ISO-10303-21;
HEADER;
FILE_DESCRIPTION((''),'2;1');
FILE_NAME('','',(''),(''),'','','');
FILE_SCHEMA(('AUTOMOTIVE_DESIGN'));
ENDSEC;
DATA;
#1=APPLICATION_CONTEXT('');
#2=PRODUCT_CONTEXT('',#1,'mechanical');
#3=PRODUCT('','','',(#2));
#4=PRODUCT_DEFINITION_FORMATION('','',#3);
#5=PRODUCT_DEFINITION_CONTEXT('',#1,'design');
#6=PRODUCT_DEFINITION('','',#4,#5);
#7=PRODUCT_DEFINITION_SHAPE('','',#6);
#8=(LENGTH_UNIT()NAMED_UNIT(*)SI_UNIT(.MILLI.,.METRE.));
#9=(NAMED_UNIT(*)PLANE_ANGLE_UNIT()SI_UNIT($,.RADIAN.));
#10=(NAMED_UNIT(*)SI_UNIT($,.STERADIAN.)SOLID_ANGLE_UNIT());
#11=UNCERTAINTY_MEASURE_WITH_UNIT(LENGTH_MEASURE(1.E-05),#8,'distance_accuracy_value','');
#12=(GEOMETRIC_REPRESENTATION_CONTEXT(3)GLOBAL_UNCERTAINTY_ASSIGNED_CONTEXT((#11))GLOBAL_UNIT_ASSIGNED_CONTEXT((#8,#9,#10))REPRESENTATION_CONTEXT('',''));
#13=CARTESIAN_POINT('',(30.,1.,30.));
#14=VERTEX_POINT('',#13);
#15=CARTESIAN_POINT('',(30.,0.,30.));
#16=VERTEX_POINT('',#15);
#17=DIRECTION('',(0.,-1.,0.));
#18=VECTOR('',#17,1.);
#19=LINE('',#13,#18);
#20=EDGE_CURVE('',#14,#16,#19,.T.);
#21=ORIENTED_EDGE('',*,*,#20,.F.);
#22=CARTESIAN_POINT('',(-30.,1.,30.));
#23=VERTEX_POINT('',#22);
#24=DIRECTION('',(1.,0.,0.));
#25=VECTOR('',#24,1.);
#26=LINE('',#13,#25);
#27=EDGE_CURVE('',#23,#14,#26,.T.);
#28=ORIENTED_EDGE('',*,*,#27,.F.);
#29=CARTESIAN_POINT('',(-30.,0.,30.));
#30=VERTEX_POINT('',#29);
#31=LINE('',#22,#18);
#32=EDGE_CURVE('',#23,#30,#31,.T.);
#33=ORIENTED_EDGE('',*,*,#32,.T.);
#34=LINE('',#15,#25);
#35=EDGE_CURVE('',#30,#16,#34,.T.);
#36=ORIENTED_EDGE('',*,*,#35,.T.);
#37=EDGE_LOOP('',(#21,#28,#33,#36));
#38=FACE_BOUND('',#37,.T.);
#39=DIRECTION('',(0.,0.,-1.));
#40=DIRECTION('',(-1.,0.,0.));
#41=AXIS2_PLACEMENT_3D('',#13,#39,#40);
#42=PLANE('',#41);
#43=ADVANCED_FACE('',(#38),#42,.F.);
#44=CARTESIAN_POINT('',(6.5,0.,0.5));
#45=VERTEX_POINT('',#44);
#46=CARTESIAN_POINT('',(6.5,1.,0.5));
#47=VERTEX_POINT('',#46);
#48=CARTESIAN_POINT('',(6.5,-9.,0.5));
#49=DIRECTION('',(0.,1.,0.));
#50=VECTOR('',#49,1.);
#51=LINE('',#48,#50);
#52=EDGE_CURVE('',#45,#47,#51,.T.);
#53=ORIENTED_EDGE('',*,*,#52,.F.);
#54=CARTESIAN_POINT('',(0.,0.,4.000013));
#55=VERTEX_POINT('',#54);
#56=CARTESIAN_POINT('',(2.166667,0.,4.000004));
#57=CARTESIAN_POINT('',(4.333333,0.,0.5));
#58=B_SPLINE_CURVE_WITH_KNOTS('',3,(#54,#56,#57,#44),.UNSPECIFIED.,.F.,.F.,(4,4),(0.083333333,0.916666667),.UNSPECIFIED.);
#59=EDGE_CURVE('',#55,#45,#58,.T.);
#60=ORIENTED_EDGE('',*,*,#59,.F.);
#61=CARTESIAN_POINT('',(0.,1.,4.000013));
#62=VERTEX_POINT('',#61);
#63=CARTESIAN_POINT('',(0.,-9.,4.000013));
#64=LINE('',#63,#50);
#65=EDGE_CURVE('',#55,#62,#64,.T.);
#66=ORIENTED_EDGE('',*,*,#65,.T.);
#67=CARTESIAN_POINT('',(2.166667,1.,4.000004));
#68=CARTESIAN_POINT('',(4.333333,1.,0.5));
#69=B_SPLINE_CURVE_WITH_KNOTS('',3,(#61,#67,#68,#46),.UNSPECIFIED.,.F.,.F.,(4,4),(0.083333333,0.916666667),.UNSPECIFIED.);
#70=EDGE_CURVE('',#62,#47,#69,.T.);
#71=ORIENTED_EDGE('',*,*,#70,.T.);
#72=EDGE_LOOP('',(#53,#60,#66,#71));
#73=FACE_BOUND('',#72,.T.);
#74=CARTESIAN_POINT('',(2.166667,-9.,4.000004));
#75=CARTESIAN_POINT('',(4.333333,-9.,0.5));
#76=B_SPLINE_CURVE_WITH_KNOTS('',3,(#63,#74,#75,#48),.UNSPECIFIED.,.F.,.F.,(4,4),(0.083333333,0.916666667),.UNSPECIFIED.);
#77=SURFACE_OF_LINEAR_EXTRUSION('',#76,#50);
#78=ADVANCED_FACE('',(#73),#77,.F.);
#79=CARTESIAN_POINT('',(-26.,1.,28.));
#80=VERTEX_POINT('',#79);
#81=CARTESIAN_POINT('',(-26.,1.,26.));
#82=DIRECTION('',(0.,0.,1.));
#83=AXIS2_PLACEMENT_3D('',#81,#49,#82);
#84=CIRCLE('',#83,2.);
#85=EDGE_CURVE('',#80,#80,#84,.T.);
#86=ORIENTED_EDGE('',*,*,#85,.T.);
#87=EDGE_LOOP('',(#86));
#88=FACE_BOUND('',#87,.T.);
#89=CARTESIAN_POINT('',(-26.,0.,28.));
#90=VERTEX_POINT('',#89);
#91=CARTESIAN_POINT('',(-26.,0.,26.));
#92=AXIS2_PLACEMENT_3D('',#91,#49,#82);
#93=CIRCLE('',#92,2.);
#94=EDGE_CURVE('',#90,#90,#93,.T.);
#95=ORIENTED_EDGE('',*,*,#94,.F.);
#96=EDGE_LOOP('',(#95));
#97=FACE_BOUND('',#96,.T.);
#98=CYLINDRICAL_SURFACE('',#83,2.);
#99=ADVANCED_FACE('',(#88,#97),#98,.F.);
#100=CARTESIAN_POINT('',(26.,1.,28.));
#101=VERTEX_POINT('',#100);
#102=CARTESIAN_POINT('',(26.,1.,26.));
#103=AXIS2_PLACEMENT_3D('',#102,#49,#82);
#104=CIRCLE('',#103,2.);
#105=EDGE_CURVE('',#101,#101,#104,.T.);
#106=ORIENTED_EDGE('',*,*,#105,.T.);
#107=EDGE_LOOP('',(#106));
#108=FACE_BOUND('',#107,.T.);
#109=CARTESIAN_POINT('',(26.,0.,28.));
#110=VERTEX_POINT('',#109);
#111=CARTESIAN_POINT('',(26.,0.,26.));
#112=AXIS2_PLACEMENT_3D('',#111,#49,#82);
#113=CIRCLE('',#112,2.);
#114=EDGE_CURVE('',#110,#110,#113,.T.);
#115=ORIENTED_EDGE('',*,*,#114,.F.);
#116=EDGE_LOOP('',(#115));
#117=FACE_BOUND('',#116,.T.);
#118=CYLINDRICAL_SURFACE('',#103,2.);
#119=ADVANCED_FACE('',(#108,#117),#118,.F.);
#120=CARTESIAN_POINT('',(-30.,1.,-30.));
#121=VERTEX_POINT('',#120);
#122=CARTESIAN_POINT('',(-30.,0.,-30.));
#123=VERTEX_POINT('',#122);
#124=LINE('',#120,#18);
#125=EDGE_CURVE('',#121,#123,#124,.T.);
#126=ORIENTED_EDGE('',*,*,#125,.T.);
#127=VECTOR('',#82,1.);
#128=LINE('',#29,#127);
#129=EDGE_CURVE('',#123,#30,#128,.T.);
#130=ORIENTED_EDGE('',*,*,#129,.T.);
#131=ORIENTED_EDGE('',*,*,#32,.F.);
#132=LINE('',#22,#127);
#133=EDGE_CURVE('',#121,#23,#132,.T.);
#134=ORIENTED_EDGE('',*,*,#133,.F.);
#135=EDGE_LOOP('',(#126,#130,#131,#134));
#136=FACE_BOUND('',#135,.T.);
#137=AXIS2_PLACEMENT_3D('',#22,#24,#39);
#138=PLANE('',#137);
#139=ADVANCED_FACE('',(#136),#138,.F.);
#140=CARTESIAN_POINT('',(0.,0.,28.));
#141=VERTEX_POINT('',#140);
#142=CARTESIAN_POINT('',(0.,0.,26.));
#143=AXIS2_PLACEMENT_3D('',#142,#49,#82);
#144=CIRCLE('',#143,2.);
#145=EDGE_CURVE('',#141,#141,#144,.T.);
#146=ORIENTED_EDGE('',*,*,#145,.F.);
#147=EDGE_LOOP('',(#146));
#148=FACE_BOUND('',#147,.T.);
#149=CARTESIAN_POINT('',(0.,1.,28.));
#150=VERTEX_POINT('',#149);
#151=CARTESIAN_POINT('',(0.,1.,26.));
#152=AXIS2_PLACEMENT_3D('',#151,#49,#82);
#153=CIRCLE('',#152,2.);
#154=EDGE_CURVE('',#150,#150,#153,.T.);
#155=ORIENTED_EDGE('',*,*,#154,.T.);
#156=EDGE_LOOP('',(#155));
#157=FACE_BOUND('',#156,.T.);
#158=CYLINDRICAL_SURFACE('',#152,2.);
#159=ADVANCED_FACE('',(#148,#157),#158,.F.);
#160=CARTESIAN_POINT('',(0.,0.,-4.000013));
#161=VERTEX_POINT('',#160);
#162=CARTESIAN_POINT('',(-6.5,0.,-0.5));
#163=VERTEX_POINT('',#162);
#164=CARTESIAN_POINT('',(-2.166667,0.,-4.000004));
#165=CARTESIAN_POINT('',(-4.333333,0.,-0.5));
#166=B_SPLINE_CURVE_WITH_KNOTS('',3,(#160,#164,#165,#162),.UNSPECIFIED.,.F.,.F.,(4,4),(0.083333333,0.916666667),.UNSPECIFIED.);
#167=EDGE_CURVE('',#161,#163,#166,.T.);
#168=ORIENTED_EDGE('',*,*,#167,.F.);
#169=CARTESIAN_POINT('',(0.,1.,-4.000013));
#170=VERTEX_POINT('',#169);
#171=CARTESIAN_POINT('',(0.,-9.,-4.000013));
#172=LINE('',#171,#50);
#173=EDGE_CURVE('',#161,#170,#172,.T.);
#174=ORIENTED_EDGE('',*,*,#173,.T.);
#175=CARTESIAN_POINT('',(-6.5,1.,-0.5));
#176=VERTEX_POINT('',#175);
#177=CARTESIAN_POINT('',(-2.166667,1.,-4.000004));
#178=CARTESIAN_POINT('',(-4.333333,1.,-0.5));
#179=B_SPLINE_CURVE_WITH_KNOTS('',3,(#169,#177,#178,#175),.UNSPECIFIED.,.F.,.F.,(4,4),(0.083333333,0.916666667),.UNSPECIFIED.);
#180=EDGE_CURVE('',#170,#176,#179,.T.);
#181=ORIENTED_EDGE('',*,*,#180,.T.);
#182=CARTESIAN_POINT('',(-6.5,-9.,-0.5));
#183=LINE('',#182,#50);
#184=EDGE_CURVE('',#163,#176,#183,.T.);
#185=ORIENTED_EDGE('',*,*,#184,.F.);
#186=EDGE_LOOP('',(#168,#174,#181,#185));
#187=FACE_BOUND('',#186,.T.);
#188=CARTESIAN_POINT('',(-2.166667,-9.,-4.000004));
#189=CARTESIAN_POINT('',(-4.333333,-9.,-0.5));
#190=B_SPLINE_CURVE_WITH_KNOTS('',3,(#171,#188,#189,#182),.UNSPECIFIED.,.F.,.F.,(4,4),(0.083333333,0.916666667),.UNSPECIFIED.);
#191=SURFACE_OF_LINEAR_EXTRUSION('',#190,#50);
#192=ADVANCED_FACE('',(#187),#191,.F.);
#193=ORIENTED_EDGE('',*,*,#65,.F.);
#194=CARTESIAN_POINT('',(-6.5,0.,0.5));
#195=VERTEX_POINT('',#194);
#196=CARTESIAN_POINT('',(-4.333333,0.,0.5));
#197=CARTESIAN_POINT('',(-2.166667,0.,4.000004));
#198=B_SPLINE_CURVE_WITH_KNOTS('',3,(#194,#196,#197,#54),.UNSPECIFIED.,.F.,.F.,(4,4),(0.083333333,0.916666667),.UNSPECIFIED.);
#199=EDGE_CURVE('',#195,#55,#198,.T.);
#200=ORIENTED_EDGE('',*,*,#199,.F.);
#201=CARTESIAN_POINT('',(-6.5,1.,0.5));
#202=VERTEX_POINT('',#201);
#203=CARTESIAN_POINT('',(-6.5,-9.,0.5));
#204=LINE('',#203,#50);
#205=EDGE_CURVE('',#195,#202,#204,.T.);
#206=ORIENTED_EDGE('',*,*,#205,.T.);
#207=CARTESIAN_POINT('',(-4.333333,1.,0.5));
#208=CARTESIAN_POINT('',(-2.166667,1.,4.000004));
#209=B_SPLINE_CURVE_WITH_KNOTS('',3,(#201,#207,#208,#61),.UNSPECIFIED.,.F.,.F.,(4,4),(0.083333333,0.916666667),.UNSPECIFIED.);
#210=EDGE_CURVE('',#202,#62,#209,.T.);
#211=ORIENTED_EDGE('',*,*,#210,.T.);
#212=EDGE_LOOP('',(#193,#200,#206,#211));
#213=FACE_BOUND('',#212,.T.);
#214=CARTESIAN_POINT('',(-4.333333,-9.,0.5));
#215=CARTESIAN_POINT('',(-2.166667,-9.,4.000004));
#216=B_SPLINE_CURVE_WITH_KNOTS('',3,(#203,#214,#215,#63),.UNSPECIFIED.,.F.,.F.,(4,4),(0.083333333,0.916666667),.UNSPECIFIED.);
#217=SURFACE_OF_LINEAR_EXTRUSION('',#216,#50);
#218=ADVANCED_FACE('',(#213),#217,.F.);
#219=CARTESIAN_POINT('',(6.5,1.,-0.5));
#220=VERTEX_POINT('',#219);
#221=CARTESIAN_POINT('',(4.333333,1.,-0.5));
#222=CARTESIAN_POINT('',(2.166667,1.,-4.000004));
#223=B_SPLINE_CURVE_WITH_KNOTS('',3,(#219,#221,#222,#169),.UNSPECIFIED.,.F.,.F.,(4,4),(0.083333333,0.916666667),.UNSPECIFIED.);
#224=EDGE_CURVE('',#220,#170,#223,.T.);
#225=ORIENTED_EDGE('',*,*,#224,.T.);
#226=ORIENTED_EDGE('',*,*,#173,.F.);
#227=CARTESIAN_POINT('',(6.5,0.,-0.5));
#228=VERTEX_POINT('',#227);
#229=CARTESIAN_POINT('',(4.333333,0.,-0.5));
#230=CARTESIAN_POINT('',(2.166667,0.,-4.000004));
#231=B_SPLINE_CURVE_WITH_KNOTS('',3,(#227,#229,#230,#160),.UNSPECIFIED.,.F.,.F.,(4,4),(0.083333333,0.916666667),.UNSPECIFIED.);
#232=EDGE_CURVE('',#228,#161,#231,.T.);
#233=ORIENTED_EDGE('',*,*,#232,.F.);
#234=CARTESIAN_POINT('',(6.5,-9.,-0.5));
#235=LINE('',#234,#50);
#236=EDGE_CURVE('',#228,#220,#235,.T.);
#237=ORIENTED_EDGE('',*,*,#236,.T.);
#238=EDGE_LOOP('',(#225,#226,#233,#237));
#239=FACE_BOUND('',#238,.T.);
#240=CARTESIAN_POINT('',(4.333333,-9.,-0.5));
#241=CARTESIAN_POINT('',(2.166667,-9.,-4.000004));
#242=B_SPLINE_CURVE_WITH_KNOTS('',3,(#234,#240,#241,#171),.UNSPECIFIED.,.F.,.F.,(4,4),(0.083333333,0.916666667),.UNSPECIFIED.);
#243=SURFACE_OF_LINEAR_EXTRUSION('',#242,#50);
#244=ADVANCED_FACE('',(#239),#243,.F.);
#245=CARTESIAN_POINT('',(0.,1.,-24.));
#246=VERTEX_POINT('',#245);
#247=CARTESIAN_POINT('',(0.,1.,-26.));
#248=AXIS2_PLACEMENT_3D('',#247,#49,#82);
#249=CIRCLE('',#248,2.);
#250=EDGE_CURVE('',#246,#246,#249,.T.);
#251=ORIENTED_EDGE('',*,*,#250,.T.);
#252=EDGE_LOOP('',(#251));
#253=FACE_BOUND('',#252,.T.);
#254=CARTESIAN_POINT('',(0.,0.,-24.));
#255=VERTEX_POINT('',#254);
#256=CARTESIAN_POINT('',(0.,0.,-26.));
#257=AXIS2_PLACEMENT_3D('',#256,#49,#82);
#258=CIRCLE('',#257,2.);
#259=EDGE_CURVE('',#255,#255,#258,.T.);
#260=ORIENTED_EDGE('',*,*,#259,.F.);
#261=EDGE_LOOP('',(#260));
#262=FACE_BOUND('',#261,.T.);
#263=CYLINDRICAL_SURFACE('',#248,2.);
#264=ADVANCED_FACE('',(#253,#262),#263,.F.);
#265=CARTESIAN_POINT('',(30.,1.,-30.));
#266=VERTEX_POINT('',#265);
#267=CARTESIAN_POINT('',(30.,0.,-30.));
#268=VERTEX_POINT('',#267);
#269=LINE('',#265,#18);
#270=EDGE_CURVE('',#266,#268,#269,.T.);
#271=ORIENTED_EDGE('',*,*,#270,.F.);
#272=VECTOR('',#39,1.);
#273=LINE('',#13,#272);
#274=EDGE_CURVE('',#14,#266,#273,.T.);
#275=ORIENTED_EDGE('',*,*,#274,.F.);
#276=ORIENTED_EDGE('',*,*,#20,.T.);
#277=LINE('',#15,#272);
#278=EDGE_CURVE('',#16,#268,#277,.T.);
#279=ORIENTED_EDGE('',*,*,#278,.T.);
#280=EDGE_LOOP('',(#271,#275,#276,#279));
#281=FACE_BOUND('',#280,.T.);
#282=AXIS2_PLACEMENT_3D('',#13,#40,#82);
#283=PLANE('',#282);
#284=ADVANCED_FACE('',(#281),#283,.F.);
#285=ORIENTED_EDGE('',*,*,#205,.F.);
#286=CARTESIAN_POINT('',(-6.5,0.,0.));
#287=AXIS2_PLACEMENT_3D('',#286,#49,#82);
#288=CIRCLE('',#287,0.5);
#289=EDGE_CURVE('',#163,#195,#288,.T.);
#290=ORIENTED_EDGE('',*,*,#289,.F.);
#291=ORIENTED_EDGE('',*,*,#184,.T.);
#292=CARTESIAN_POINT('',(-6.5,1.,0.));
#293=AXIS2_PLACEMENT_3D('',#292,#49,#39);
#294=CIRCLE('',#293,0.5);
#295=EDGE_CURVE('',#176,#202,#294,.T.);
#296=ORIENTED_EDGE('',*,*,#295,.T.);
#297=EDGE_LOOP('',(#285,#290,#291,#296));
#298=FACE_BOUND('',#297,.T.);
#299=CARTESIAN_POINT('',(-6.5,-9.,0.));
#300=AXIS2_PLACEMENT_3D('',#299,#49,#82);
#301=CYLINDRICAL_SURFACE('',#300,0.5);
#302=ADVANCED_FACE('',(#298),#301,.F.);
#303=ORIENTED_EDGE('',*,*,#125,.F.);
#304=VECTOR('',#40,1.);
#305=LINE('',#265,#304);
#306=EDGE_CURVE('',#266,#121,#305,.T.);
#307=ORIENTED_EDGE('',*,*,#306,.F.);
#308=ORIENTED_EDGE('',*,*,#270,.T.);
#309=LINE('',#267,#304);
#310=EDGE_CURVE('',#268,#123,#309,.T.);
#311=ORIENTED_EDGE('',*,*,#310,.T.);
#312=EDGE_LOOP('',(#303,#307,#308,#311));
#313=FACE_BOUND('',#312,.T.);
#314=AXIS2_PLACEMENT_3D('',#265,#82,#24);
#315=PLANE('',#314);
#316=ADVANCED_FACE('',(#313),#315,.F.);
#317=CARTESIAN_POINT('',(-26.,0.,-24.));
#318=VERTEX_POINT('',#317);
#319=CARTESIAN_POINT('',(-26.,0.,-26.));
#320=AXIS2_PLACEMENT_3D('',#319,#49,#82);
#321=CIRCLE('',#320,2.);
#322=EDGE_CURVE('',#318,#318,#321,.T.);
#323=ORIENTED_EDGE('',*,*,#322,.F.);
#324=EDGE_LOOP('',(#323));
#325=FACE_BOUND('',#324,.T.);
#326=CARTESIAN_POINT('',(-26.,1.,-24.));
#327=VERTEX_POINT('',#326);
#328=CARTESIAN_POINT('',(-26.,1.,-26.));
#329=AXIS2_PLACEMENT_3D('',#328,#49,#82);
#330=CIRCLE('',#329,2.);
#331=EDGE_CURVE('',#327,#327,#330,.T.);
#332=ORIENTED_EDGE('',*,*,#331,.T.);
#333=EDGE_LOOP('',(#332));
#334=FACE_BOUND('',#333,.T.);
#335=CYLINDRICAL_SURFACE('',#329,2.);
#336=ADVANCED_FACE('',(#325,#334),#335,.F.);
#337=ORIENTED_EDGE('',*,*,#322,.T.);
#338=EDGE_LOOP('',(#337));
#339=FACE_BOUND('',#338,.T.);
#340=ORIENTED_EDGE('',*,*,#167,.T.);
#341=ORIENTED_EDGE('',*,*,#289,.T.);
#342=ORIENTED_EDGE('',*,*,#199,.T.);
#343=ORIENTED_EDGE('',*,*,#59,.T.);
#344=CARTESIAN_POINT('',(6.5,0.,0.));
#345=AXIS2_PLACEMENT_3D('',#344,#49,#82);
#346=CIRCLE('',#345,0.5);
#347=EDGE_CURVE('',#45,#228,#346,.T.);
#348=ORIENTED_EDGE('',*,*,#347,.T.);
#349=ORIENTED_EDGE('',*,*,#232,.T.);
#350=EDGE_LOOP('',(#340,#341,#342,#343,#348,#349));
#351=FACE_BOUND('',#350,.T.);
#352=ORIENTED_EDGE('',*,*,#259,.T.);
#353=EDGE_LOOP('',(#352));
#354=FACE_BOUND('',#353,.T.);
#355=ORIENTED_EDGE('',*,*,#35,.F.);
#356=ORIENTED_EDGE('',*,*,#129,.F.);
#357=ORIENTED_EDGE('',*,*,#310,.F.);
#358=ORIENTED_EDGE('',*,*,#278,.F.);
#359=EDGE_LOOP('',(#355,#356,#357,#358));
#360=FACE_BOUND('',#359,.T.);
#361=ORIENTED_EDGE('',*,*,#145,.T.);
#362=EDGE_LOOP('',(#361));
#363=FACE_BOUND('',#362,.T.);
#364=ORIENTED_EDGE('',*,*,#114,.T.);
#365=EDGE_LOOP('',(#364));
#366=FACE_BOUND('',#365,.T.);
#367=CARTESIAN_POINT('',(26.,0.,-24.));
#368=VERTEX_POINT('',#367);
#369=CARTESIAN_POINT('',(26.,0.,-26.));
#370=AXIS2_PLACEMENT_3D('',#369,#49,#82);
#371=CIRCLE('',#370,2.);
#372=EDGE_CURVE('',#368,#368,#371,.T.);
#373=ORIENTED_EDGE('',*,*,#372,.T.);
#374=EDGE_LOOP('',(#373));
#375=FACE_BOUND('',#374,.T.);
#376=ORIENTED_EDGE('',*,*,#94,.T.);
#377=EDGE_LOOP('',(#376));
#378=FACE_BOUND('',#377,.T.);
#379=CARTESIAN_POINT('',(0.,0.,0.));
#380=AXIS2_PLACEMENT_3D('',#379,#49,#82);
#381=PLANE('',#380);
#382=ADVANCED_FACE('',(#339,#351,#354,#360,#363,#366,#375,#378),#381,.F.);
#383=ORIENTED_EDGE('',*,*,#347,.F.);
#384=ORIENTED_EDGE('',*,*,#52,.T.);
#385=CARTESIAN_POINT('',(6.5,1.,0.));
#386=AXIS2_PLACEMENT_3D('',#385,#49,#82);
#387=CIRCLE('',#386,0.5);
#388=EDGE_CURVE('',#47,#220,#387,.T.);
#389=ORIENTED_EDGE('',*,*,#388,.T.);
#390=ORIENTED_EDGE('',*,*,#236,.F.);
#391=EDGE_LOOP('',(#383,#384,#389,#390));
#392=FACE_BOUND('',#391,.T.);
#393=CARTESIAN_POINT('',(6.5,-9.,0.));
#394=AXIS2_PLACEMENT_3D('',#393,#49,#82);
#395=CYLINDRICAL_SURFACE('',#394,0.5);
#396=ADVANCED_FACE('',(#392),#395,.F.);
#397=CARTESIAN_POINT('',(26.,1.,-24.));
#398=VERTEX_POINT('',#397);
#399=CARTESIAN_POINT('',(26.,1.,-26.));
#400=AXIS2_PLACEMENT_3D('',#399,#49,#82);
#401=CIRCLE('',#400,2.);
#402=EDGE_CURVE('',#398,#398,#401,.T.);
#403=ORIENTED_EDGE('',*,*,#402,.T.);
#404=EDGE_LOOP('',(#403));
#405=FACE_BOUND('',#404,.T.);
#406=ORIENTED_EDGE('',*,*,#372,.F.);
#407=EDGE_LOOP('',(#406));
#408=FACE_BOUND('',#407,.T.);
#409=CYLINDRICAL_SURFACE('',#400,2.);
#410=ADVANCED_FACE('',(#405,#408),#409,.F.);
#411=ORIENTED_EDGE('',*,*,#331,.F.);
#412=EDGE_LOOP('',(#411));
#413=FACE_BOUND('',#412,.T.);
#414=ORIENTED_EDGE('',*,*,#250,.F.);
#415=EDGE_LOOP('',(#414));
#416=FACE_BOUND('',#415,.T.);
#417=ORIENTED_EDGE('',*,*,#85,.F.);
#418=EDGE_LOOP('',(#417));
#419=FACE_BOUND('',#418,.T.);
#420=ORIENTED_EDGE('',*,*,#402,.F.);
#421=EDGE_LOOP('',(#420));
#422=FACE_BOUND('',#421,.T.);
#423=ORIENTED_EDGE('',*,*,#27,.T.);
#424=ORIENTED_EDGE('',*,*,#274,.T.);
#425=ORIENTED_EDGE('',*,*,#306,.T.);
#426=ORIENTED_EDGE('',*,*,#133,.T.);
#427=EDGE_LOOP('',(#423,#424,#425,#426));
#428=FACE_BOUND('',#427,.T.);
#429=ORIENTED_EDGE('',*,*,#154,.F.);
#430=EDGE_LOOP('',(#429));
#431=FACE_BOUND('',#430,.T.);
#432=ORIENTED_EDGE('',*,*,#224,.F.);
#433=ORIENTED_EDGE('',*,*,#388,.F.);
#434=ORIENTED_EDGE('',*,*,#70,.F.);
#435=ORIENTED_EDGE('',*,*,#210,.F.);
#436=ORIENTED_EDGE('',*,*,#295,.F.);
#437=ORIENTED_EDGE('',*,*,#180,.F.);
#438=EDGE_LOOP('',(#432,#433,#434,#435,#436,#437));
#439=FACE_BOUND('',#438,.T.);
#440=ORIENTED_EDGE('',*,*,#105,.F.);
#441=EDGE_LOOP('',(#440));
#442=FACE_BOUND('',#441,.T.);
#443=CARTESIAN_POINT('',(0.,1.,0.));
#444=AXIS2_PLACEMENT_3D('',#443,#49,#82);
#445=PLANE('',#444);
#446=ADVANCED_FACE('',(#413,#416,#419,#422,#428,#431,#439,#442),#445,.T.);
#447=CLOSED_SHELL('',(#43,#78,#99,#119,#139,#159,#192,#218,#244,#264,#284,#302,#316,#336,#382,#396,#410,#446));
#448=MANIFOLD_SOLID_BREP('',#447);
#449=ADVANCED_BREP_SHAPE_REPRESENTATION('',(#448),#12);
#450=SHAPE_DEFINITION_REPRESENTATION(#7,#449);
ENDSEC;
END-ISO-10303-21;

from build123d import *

# Parameters (mm, degrees)
SKETCH1_W                = 60
SKETCH1_H                = 60
BOSS_EXTRUDE1_DEPTH      = 1
F_4_0_4_DIAMETER_HOLE1_D = 4
ICELL_DEPTH              = 10


with BuildPart() as part:
    # Sketch1 → Boss-Extrude1 (new body)
    with BuildSketch(Plane(origin=(0, 0, 0), x_dir=(1, 0, 0), z_dir=(0, 1, 0))):
        Rectangle(SKETCH1_W, SKETCH1_H)
    extrude(amount=BOSS_EXTRUDE1_DEPTH)

    # Ø4.0 (4) Diameter Hole1 (through all)
    with Locations(Plane(origin=(0, 1, 0), x_dir=(1, 0, 0), z_dir=(0, 1, 0))):
        with Locations((26, 26), (0, 26), (-26, 26), (0, -26), (26, -26), (-26, -26)):
            Hole(F_4_0_4_DIAMETER_HOLE1_D / 2)

    # Sketch19 → iCell (cut)
    with BuildSketch(Plane(origin=(0, 1, 0), x_dir=(1, 0, 0), z_dir=(0, 1, 0))):
        with BuildLine():
            ThreePointArc((-6.5, -0.5), (-7, 0), (-6.5, 0.5))
            add(Edge.make_bspline(
                [(-6.5, 0.5), (-4.333333334, 0.5), (-2.166666667, 4.000004082), (-1e-09, 4.000013237)],
                knots=[0.083333333, 0.083333333, 0.083333333, 0.083333333, 0.916666667, 0.916666667, 0.916666667, 0.916666667], degree=3))
            add(Edge.make_bspline(
                [(6.499999999, 0.5), (4.333333333, 0.5), (2.166666666, 4.000004083), (-1e-09, 4.000013237)],
                knots=[0.083333333, 0.083333333, 0.083333333, 0.083333333, 0.916666667, 0.916666667, 0.916666667, 0.916666667], degree=3))
            ThreePointArc((6.499999999, 0.5), (6.999999999, 0), (6.499999999, -0.5))
            add(Edge.make_bspline(
                [(6.499999999, -0.5), (4.333333333, -0.5), (2.166666666, -4.000004083), (0, -4.000013237)],
                knots=[0.083333333, 0.083333333, 0.083333333, 0.083333333, 0.916666667, 0.916666667, 0.916666667, 0.916666667], degree=3))
            add(Edge.make_bspline(
                [(-6.5, -0.5), (-4.333333334, -0.5), (-2.166666667, -4.000004083), (0, -4.000013237)],
                knots=[0.083333333, 0.083333333, 0.083333333, 0.083333333, 0.916666667, 0.916666667, 0.916666667, 0.916666667], degree=3))
        make_face()
    extrude(amount=-ICELL_DEPTH, mode=Mode.SUBTRACT)


solid = part.part
